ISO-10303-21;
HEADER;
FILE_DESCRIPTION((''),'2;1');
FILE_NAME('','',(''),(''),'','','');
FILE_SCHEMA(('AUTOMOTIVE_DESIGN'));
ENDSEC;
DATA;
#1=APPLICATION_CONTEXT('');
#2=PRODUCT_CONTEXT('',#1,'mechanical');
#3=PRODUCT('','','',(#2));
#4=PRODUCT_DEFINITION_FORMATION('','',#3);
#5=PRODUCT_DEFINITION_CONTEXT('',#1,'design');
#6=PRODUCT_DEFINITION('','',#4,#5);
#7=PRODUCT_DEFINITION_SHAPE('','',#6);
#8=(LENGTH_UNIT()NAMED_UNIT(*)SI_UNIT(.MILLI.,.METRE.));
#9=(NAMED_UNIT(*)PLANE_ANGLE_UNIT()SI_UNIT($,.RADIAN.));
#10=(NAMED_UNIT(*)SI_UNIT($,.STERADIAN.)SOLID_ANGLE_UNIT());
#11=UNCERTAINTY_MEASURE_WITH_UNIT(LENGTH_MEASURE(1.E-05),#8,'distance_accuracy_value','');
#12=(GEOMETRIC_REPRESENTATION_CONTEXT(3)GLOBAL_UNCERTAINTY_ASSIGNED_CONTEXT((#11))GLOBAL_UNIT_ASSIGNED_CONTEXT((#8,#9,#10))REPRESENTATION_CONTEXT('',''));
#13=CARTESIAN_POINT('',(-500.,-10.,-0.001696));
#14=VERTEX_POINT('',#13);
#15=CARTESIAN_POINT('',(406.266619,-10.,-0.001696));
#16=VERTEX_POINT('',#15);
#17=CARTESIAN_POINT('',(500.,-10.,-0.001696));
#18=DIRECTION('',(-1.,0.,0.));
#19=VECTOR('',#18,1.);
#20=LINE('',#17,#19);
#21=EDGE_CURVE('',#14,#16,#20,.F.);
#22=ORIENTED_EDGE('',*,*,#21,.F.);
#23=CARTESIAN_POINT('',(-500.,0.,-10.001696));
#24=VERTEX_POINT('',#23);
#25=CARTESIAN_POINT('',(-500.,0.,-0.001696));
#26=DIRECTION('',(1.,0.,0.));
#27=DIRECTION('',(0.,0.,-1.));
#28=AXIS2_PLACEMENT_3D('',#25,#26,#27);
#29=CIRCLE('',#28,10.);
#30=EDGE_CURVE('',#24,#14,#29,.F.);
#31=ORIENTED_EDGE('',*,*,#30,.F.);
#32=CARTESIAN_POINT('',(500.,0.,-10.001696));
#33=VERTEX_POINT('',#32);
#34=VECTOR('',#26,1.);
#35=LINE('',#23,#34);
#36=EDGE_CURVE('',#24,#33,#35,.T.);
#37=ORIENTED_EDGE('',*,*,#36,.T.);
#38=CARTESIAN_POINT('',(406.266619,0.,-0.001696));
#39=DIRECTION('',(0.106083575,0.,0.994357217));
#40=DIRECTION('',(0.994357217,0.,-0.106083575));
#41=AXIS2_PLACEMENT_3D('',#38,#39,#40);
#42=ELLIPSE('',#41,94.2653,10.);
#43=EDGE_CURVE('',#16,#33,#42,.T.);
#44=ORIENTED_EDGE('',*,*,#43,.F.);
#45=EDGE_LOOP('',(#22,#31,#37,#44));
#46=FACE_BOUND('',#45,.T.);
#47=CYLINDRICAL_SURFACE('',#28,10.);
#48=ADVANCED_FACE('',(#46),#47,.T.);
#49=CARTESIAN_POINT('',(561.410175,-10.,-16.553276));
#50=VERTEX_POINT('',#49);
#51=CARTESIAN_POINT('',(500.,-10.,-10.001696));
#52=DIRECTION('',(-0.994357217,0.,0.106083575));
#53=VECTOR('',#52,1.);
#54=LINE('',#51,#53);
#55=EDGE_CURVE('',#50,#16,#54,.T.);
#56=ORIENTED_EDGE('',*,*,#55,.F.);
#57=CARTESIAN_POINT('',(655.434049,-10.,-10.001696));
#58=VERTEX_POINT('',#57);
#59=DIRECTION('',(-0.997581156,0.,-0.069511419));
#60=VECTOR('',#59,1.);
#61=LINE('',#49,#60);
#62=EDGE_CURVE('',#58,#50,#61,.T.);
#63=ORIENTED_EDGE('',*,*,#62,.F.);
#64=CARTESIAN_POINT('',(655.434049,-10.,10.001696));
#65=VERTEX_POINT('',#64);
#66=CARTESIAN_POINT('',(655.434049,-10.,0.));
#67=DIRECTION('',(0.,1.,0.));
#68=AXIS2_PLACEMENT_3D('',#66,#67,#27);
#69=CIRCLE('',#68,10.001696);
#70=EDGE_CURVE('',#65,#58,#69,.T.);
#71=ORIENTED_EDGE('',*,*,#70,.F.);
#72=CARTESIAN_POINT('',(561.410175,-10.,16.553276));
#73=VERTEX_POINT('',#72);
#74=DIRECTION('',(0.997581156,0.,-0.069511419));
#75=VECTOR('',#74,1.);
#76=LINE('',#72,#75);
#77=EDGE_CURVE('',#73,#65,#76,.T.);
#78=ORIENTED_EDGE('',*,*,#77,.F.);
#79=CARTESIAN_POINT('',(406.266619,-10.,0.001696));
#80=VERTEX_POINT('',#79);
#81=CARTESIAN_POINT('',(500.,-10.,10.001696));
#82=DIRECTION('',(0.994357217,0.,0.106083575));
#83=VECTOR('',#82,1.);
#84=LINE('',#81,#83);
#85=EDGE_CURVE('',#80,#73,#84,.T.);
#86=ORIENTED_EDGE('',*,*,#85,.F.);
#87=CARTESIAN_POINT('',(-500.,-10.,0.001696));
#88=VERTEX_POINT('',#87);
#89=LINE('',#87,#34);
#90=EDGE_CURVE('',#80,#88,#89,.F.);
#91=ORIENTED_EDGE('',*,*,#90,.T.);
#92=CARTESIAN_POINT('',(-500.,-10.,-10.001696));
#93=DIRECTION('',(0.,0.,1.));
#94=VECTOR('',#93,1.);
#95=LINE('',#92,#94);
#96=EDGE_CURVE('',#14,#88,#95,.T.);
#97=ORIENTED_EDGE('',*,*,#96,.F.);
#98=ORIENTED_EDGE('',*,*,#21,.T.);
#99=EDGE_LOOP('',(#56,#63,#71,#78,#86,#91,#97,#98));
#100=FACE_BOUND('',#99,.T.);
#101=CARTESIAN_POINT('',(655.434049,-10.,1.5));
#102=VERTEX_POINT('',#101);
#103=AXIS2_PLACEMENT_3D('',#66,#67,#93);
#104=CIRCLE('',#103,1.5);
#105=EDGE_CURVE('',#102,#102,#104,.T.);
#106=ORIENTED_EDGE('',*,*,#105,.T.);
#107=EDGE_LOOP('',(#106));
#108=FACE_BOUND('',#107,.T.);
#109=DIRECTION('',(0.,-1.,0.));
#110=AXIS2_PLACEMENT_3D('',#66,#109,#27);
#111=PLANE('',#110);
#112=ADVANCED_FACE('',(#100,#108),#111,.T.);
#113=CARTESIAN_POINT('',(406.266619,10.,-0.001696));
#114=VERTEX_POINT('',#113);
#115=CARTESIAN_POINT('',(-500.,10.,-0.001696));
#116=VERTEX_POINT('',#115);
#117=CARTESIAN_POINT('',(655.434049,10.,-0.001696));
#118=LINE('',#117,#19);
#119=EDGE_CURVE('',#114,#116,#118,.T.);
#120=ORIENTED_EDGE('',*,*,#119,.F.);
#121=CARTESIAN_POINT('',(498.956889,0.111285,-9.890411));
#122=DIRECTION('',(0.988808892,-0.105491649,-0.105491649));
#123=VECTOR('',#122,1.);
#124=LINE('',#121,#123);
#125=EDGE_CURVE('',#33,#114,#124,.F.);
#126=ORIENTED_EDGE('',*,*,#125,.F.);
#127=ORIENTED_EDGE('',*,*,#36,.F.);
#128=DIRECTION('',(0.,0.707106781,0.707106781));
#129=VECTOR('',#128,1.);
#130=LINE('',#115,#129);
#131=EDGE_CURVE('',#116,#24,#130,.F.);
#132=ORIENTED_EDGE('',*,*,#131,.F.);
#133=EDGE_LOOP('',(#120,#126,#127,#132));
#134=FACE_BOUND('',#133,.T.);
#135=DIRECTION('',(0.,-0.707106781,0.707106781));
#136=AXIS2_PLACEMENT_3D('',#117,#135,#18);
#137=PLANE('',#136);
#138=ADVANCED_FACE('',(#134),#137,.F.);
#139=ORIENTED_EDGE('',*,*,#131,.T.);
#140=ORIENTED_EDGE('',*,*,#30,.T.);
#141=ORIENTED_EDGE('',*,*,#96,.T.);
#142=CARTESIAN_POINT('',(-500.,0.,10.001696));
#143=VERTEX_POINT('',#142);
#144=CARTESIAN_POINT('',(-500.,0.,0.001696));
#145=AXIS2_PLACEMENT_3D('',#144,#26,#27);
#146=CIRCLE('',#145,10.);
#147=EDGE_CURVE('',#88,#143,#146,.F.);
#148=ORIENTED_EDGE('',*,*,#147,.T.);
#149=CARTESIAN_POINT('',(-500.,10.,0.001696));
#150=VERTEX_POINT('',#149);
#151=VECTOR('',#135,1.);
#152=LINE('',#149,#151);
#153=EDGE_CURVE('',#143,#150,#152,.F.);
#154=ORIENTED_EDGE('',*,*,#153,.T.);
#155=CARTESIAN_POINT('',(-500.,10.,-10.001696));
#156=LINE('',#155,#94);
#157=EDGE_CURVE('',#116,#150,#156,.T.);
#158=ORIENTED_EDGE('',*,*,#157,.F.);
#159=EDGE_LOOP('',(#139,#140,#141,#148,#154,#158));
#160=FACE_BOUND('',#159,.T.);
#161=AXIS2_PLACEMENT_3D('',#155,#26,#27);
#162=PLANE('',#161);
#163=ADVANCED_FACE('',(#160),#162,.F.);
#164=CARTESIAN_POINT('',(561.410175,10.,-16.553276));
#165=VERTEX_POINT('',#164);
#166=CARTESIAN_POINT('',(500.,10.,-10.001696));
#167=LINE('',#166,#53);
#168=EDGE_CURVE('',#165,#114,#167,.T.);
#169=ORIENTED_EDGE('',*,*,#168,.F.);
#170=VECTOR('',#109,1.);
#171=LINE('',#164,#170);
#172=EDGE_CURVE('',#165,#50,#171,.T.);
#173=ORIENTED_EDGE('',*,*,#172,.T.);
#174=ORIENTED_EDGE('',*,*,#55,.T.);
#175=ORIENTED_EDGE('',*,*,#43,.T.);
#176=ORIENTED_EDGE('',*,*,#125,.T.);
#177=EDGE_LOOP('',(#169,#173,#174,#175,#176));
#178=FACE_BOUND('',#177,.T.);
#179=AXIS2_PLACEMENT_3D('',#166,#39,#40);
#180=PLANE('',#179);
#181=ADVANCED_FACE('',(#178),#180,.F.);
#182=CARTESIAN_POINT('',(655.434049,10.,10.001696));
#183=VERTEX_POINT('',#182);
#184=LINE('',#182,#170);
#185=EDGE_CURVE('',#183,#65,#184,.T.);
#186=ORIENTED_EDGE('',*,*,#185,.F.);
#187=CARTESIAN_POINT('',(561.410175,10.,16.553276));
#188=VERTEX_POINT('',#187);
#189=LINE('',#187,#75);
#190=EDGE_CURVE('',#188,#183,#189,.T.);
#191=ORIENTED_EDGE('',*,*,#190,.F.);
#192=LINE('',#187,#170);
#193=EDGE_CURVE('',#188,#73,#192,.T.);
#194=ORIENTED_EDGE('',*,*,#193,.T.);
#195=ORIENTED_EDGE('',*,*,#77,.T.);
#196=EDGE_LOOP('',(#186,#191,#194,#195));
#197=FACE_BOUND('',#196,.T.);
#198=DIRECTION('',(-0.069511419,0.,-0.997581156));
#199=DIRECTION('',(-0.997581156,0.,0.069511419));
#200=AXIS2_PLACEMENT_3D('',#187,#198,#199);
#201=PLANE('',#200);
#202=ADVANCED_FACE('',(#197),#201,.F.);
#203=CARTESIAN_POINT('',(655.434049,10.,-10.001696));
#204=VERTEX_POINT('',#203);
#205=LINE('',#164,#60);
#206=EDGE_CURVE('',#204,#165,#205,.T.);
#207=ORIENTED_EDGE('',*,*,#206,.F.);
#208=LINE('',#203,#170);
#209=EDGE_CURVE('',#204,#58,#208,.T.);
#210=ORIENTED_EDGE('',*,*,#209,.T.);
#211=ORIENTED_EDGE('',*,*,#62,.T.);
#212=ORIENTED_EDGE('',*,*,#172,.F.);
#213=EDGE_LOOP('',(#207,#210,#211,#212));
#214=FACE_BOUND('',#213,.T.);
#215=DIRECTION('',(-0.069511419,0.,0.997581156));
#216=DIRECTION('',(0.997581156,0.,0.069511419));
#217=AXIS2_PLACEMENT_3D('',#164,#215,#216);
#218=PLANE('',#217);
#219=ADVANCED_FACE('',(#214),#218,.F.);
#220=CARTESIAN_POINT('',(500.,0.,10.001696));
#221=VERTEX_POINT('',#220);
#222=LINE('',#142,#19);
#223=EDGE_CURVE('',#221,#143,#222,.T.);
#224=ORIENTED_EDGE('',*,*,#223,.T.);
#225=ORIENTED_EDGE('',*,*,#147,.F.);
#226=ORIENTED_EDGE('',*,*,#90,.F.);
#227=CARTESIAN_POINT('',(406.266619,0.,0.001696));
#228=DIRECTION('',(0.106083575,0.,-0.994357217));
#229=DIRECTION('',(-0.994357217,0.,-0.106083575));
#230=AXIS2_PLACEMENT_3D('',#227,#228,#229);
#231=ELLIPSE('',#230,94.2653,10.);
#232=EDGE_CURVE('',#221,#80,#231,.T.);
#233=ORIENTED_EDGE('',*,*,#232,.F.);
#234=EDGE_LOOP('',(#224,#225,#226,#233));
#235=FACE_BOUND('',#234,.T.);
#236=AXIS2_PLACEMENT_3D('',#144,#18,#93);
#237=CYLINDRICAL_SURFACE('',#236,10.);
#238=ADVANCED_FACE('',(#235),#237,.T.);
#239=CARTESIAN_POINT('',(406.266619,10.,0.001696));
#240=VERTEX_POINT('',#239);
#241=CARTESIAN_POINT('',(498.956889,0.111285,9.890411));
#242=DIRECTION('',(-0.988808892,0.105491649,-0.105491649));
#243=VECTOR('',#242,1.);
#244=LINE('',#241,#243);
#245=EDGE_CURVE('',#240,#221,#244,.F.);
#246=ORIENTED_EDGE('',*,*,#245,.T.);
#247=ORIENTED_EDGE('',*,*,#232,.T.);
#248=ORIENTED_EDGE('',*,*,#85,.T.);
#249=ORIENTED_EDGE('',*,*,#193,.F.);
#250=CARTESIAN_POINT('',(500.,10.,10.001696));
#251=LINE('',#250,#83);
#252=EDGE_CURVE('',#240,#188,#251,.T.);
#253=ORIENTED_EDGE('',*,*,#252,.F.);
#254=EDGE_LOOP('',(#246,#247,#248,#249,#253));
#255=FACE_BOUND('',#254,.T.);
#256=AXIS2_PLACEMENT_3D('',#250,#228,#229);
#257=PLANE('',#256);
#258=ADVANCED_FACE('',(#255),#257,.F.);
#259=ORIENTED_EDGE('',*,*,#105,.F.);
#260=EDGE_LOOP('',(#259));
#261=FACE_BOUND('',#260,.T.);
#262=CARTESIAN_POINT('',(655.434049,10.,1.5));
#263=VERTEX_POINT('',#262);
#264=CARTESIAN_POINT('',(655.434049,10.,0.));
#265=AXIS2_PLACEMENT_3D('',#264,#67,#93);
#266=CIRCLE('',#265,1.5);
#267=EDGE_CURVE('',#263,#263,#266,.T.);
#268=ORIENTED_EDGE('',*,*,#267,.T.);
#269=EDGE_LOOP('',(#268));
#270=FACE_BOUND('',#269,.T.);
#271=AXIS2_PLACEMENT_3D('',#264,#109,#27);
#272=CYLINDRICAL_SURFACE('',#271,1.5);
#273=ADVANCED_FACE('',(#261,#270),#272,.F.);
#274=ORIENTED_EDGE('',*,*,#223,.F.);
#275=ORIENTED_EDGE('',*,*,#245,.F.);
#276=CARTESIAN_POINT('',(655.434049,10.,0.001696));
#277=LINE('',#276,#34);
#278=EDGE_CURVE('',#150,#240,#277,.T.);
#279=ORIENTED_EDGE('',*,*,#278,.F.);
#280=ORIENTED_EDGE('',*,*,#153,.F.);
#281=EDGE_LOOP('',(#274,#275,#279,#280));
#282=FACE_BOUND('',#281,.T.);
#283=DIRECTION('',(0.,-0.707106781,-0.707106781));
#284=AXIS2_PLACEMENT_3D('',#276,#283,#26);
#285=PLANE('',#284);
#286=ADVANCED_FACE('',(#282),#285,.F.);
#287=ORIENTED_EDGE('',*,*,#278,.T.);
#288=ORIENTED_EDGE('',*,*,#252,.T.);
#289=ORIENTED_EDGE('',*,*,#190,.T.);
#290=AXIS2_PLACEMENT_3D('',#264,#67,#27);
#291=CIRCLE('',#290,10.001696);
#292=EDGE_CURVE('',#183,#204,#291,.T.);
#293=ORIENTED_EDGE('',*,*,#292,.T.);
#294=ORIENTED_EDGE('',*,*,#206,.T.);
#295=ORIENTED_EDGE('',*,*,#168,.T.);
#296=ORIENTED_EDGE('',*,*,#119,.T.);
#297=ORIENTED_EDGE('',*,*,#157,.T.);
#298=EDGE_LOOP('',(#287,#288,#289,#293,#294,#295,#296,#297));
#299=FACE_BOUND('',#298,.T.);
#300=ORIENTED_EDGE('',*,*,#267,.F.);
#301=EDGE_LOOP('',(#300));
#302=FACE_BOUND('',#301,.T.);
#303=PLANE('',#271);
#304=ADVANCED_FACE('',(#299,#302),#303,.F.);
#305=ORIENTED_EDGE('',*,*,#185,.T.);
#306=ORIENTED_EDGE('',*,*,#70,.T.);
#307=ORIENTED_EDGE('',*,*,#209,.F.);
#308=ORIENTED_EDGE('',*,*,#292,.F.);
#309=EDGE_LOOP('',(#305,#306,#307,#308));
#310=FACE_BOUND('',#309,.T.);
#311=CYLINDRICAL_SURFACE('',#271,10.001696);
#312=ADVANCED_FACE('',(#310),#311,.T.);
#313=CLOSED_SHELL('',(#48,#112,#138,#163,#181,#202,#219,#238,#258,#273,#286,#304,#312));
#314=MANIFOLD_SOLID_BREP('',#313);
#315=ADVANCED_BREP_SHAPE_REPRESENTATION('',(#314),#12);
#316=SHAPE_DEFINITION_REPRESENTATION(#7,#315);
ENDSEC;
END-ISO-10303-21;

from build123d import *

# Parameters (mm, degrees)
SKETCH1_R           = 1.5
BOSS_EXTRUDE1_DEPTH = 10
CHAMFER1_SIZE       = 10
FILLET1_R           = 10


with BuildPart() as part:
    # Sketch1 → Boss-Extrude1 (new, symmetric)
    with BuildSketch(Plane(origin=(0, 0, 0), x_dir=(1, 0, 0), z_dir=(0, 1, 0))):
        with BuildLine():
            Line((500, 10.00169637), (561.410175266, 16.553276436))
            Line((561.410175266, 16.553276436), (655.434048607, 10.00169637))
            ThreePointArc((655.434048607, 10.00169637), (665.435744977, 0), (655.434048607, -10.00169637))
            Line((655.434048607, -10.00169637), (561.410175266, -16.553276436))
            Line((561.410175266, -16.553276436), (500, -10.00169637))
            Line((500, -10.00169637), (-500, -10.00169637))
            Line((-500, -10.00169637), (-500, 10.00169637))
            Line((-500, 10.00169637), (500, 10.00169637))
        make_face()
        with Locations(Location((655.434048607, 0, 0), (0, 0, 270))):
            Circle(SKETCH1_R, mode=Mode.SUBTRACT)
    extrude(amount=BOSS_EXTRUDE1_DEPTH, both=True)

    # Chamfer1
    chamfer1_edges = [part.edges().sort_by_distance(p)[0] for p in [
        (0, 10, -10.00169637),
        (0, 10, 10.00169637),
    ]]
    chamfer(chamfer1_edges, length=CHAMFER1_SIZE)

    # Fillet1
    fillet1_edges = [part.edges().sort_by_distance(p)[0] for p in [
        (0, -10, 10.00169637),
        (0, -10, -10.00169637),
    ]]
    fillet(fillet1_edges, radius=FILLET1_R - 0.0001)  # a hair under: the kernel refuses the full size


solid = part.part
